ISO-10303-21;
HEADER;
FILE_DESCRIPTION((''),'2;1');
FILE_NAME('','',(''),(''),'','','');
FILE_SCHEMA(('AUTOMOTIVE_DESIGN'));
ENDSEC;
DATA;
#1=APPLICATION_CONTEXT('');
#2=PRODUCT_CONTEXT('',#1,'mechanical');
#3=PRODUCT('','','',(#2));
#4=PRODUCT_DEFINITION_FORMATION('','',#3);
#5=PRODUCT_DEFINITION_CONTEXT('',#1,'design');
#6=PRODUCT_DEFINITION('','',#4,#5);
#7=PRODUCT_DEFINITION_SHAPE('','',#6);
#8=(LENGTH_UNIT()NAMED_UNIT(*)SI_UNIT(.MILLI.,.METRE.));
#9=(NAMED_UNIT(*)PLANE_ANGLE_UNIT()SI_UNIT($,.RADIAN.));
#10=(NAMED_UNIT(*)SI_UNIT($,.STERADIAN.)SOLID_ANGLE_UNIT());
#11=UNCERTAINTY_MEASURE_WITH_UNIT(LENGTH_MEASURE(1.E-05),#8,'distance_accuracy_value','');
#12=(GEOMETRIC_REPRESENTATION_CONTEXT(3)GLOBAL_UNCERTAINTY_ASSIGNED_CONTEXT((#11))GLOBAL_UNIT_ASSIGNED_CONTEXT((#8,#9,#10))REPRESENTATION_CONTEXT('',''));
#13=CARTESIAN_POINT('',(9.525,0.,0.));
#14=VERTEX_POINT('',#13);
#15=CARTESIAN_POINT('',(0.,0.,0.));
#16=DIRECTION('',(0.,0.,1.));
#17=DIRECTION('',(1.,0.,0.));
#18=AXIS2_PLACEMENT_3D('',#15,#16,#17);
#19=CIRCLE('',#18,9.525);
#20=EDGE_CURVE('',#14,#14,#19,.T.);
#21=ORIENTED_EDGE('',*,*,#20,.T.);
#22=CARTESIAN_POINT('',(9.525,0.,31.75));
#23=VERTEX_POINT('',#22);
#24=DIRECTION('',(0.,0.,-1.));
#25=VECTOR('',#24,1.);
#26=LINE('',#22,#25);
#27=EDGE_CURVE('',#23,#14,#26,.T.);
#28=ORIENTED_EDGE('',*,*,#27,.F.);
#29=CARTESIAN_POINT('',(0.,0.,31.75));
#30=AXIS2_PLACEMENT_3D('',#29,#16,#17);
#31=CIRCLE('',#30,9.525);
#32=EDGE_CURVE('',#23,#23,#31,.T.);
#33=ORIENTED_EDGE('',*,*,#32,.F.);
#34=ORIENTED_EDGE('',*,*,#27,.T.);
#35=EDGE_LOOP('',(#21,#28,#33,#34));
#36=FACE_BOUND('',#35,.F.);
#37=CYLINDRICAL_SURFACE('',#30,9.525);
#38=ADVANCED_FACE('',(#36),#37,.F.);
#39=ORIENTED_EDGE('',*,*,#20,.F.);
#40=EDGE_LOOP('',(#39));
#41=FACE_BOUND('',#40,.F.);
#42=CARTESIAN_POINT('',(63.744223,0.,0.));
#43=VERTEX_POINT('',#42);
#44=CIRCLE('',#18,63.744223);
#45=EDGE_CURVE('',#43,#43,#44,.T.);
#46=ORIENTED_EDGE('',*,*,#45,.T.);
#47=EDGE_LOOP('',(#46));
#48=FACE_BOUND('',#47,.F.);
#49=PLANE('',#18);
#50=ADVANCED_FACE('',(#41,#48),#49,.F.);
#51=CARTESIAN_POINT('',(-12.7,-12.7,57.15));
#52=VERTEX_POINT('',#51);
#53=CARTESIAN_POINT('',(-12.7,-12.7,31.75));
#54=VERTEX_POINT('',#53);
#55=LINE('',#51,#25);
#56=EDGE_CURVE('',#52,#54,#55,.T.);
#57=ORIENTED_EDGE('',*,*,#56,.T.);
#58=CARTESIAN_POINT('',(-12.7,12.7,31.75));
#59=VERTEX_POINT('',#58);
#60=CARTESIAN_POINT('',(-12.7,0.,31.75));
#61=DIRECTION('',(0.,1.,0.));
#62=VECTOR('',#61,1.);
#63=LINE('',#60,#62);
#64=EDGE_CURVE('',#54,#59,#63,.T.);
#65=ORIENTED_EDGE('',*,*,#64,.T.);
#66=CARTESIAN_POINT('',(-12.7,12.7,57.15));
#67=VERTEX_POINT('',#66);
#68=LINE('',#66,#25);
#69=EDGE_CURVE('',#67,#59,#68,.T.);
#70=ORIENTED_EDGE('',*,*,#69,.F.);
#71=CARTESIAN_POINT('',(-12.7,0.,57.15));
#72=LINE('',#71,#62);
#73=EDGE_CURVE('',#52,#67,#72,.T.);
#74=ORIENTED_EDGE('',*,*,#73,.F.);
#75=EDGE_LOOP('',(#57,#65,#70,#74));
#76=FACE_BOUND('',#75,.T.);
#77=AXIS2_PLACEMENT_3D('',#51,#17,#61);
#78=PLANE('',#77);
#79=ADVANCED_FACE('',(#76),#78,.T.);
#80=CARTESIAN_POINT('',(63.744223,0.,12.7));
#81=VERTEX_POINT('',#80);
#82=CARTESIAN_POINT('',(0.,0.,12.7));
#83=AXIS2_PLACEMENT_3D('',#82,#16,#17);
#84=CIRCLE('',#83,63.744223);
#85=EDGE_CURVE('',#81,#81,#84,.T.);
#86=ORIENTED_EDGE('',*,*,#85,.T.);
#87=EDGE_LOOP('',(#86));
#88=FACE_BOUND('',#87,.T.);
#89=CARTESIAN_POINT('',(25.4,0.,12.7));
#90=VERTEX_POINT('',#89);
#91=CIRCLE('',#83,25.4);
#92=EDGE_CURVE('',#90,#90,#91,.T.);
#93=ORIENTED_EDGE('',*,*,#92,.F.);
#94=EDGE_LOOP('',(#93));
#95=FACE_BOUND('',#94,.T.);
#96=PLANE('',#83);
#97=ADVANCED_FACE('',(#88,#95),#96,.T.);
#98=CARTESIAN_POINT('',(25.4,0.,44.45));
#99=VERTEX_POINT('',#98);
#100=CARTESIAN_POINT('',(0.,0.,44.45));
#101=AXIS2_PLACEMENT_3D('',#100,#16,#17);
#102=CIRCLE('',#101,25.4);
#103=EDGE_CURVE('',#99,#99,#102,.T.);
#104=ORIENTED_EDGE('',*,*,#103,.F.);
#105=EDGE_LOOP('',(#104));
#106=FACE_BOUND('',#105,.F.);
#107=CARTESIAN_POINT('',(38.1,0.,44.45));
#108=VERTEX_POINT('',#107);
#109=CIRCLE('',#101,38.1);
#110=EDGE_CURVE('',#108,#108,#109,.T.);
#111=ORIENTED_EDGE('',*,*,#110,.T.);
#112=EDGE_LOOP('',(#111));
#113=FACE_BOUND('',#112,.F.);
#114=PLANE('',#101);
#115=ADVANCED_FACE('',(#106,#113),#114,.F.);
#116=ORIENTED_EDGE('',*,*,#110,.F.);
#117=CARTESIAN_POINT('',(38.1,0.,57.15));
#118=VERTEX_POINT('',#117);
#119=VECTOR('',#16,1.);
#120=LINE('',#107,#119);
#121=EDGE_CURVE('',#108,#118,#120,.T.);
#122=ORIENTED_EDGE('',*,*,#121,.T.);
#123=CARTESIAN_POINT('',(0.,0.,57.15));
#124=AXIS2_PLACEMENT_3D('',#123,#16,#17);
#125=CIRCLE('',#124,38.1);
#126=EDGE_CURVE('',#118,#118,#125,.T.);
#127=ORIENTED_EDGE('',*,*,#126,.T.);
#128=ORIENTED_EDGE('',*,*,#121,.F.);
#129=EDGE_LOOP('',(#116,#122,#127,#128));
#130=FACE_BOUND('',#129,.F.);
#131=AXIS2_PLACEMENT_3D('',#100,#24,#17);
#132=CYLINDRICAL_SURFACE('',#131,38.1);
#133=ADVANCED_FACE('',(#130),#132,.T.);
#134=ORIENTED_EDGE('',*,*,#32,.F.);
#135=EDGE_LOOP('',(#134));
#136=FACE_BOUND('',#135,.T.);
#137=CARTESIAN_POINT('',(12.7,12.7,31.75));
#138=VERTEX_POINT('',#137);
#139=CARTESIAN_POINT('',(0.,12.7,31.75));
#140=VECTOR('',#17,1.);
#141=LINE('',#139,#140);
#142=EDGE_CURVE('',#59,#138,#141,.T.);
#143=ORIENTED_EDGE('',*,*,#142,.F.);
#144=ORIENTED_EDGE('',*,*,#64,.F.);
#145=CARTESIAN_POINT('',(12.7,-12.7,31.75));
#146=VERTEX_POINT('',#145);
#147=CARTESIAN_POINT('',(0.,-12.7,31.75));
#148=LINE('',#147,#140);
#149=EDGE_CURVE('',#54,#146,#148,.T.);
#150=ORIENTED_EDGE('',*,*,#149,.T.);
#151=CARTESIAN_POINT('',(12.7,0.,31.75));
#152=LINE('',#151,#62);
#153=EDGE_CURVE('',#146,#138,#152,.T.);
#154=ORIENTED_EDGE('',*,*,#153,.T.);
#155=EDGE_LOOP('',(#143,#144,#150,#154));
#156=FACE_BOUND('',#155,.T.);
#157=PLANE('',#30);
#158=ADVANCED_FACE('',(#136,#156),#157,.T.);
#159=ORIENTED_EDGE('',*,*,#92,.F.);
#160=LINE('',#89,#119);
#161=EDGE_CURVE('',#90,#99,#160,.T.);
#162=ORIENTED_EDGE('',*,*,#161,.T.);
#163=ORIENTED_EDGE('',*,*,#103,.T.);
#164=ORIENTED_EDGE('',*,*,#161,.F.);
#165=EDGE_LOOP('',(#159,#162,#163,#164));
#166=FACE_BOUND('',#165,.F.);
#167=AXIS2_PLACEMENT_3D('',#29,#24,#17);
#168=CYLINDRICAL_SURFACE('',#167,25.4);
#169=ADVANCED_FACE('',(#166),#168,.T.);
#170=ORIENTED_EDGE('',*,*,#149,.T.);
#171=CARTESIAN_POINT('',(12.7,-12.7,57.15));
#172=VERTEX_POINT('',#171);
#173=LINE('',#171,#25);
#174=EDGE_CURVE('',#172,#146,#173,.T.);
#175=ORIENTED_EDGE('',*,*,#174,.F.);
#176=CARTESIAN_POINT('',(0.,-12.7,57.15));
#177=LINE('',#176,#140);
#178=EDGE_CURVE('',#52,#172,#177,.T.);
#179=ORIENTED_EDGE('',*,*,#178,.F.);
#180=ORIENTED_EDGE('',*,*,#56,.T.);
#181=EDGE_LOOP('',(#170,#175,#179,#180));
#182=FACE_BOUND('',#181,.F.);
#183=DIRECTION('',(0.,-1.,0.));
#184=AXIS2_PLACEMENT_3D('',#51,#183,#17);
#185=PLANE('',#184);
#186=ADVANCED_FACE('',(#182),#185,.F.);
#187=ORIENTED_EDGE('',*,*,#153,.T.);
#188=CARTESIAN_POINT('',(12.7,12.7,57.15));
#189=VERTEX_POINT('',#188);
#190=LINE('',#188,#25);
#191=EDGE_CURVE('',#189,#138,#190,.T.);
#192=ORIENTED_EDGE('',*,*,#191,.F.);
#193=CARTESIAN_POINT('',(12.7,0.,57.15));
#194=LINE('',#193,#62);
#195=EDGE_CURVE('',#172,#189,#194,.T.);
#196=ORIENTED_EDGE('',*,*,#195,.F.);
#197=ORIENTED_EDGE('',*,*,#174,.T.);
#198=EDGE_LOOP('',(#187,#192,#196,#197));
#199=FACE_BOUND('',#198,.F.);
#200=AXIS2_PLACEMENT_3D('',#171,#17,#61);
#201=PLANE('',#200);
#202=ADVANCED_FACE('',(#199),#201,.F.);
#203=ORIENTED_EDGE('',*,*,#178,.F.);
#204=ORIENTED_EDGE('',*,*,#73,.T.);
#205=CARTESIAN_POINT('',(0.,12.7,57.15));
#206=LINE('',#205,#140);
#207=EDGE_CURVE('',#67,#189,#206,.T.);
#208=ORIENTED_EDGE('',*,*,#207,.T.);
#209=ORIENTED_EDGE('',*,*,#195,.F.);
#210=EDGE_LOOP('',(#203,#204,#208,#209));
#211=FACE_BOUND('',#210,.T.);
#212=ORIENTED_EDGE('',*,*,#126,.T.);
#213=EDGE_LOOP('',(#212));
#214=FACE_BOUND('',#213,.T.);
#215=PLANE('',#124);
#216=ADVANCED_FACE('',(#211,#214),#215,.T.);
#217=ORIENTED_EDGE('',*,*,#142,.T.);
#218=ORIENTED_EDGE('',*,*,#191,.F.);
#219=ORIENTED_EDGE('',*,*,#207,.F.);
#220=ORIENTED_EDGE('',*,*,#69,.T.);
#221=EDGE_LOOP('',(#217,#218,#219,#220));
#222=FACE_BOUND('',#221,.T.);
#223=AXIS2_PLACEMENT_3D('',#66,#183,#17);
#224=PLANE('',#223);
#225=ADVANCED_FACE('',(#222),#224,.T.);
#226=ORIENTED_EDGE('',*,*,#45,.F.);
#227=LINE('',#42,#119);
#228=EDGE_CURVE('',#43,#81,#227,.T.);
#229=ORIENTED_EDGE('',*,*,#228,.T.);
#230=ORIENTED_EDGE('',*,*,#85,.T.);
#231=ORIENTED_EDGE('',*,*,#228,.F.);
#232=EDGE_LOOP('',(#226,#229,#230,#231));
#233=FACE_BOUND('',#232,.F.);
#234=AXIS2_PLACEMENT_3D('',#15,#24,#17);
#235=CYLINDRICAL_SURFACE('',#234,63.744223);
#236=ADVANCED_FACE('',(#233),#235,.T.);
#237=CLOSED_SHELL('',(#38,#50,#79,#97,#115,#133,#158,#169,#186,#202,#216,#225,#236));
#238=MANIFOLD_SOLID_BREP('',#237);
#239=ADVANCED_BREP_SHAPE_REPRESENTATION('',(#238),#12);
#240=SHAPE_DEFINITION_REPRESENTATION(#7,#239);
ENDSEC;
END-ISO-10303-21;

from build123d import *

# Parameters (mm, degrees)
F0_R      = 63.7442234454
F1_DEPTH  = 12.7
F2_R      = 25.4
F3_DEPTH  = 19.05
F4_R      = 9.525
F5_DEPTH  = 50.8
F6_DEPTH  = 12.7
F7_R      = 38.1
F8_DEPTH  = 12.7
F9_W      = 25.4
F9_H      = 25.4
F10_DEPTH = 25.4


with BuildPart() as f1:
    # F0 (on Top) → F1 (new body)
    with BuildSketch(Plane.XY):
        Circle(F0_R)
    extrude(amount=F1_DEPTH)

    # F2 (on face) → F3 (join)
    with BuildSketch(Plane.XY.offset(12.7)):
        Circle(F2_R)
    extrude(amount=F3_DEPTH)

    # F4 (on face) → F5 (cut)
    with BuildSketch(Plane.XY.offset(31.75)):
        Circle(F4_R)
    extrude(amount=-F5_DEPTH, mode=Mode.SUBTRACT)

    # F6 (add): a face of the model
    f6_faces = [f1.faces().sort_by_distance(p)[0] for p in [
        (-24.6815795103, 0, 31.75),
    ]]
    extrude(f6_faces, amount=F6_DEPTH)

    # F7 (on face) → F8 (join)
    with BuildSketch(Plane.XY.offset(44.45)):
        Circle(F7_R)
    extrude(amount=F8_DEPTH)

    # F9 (on face) → F10 (cut)
    with BuildSketch(Plane.XY.offset(57.15)):
        Rectangle(F9_W, F9_H)
    extrude(amount=-F10_DEPTH, mode=Mode.SUBTRACT)


solid = f1.part
